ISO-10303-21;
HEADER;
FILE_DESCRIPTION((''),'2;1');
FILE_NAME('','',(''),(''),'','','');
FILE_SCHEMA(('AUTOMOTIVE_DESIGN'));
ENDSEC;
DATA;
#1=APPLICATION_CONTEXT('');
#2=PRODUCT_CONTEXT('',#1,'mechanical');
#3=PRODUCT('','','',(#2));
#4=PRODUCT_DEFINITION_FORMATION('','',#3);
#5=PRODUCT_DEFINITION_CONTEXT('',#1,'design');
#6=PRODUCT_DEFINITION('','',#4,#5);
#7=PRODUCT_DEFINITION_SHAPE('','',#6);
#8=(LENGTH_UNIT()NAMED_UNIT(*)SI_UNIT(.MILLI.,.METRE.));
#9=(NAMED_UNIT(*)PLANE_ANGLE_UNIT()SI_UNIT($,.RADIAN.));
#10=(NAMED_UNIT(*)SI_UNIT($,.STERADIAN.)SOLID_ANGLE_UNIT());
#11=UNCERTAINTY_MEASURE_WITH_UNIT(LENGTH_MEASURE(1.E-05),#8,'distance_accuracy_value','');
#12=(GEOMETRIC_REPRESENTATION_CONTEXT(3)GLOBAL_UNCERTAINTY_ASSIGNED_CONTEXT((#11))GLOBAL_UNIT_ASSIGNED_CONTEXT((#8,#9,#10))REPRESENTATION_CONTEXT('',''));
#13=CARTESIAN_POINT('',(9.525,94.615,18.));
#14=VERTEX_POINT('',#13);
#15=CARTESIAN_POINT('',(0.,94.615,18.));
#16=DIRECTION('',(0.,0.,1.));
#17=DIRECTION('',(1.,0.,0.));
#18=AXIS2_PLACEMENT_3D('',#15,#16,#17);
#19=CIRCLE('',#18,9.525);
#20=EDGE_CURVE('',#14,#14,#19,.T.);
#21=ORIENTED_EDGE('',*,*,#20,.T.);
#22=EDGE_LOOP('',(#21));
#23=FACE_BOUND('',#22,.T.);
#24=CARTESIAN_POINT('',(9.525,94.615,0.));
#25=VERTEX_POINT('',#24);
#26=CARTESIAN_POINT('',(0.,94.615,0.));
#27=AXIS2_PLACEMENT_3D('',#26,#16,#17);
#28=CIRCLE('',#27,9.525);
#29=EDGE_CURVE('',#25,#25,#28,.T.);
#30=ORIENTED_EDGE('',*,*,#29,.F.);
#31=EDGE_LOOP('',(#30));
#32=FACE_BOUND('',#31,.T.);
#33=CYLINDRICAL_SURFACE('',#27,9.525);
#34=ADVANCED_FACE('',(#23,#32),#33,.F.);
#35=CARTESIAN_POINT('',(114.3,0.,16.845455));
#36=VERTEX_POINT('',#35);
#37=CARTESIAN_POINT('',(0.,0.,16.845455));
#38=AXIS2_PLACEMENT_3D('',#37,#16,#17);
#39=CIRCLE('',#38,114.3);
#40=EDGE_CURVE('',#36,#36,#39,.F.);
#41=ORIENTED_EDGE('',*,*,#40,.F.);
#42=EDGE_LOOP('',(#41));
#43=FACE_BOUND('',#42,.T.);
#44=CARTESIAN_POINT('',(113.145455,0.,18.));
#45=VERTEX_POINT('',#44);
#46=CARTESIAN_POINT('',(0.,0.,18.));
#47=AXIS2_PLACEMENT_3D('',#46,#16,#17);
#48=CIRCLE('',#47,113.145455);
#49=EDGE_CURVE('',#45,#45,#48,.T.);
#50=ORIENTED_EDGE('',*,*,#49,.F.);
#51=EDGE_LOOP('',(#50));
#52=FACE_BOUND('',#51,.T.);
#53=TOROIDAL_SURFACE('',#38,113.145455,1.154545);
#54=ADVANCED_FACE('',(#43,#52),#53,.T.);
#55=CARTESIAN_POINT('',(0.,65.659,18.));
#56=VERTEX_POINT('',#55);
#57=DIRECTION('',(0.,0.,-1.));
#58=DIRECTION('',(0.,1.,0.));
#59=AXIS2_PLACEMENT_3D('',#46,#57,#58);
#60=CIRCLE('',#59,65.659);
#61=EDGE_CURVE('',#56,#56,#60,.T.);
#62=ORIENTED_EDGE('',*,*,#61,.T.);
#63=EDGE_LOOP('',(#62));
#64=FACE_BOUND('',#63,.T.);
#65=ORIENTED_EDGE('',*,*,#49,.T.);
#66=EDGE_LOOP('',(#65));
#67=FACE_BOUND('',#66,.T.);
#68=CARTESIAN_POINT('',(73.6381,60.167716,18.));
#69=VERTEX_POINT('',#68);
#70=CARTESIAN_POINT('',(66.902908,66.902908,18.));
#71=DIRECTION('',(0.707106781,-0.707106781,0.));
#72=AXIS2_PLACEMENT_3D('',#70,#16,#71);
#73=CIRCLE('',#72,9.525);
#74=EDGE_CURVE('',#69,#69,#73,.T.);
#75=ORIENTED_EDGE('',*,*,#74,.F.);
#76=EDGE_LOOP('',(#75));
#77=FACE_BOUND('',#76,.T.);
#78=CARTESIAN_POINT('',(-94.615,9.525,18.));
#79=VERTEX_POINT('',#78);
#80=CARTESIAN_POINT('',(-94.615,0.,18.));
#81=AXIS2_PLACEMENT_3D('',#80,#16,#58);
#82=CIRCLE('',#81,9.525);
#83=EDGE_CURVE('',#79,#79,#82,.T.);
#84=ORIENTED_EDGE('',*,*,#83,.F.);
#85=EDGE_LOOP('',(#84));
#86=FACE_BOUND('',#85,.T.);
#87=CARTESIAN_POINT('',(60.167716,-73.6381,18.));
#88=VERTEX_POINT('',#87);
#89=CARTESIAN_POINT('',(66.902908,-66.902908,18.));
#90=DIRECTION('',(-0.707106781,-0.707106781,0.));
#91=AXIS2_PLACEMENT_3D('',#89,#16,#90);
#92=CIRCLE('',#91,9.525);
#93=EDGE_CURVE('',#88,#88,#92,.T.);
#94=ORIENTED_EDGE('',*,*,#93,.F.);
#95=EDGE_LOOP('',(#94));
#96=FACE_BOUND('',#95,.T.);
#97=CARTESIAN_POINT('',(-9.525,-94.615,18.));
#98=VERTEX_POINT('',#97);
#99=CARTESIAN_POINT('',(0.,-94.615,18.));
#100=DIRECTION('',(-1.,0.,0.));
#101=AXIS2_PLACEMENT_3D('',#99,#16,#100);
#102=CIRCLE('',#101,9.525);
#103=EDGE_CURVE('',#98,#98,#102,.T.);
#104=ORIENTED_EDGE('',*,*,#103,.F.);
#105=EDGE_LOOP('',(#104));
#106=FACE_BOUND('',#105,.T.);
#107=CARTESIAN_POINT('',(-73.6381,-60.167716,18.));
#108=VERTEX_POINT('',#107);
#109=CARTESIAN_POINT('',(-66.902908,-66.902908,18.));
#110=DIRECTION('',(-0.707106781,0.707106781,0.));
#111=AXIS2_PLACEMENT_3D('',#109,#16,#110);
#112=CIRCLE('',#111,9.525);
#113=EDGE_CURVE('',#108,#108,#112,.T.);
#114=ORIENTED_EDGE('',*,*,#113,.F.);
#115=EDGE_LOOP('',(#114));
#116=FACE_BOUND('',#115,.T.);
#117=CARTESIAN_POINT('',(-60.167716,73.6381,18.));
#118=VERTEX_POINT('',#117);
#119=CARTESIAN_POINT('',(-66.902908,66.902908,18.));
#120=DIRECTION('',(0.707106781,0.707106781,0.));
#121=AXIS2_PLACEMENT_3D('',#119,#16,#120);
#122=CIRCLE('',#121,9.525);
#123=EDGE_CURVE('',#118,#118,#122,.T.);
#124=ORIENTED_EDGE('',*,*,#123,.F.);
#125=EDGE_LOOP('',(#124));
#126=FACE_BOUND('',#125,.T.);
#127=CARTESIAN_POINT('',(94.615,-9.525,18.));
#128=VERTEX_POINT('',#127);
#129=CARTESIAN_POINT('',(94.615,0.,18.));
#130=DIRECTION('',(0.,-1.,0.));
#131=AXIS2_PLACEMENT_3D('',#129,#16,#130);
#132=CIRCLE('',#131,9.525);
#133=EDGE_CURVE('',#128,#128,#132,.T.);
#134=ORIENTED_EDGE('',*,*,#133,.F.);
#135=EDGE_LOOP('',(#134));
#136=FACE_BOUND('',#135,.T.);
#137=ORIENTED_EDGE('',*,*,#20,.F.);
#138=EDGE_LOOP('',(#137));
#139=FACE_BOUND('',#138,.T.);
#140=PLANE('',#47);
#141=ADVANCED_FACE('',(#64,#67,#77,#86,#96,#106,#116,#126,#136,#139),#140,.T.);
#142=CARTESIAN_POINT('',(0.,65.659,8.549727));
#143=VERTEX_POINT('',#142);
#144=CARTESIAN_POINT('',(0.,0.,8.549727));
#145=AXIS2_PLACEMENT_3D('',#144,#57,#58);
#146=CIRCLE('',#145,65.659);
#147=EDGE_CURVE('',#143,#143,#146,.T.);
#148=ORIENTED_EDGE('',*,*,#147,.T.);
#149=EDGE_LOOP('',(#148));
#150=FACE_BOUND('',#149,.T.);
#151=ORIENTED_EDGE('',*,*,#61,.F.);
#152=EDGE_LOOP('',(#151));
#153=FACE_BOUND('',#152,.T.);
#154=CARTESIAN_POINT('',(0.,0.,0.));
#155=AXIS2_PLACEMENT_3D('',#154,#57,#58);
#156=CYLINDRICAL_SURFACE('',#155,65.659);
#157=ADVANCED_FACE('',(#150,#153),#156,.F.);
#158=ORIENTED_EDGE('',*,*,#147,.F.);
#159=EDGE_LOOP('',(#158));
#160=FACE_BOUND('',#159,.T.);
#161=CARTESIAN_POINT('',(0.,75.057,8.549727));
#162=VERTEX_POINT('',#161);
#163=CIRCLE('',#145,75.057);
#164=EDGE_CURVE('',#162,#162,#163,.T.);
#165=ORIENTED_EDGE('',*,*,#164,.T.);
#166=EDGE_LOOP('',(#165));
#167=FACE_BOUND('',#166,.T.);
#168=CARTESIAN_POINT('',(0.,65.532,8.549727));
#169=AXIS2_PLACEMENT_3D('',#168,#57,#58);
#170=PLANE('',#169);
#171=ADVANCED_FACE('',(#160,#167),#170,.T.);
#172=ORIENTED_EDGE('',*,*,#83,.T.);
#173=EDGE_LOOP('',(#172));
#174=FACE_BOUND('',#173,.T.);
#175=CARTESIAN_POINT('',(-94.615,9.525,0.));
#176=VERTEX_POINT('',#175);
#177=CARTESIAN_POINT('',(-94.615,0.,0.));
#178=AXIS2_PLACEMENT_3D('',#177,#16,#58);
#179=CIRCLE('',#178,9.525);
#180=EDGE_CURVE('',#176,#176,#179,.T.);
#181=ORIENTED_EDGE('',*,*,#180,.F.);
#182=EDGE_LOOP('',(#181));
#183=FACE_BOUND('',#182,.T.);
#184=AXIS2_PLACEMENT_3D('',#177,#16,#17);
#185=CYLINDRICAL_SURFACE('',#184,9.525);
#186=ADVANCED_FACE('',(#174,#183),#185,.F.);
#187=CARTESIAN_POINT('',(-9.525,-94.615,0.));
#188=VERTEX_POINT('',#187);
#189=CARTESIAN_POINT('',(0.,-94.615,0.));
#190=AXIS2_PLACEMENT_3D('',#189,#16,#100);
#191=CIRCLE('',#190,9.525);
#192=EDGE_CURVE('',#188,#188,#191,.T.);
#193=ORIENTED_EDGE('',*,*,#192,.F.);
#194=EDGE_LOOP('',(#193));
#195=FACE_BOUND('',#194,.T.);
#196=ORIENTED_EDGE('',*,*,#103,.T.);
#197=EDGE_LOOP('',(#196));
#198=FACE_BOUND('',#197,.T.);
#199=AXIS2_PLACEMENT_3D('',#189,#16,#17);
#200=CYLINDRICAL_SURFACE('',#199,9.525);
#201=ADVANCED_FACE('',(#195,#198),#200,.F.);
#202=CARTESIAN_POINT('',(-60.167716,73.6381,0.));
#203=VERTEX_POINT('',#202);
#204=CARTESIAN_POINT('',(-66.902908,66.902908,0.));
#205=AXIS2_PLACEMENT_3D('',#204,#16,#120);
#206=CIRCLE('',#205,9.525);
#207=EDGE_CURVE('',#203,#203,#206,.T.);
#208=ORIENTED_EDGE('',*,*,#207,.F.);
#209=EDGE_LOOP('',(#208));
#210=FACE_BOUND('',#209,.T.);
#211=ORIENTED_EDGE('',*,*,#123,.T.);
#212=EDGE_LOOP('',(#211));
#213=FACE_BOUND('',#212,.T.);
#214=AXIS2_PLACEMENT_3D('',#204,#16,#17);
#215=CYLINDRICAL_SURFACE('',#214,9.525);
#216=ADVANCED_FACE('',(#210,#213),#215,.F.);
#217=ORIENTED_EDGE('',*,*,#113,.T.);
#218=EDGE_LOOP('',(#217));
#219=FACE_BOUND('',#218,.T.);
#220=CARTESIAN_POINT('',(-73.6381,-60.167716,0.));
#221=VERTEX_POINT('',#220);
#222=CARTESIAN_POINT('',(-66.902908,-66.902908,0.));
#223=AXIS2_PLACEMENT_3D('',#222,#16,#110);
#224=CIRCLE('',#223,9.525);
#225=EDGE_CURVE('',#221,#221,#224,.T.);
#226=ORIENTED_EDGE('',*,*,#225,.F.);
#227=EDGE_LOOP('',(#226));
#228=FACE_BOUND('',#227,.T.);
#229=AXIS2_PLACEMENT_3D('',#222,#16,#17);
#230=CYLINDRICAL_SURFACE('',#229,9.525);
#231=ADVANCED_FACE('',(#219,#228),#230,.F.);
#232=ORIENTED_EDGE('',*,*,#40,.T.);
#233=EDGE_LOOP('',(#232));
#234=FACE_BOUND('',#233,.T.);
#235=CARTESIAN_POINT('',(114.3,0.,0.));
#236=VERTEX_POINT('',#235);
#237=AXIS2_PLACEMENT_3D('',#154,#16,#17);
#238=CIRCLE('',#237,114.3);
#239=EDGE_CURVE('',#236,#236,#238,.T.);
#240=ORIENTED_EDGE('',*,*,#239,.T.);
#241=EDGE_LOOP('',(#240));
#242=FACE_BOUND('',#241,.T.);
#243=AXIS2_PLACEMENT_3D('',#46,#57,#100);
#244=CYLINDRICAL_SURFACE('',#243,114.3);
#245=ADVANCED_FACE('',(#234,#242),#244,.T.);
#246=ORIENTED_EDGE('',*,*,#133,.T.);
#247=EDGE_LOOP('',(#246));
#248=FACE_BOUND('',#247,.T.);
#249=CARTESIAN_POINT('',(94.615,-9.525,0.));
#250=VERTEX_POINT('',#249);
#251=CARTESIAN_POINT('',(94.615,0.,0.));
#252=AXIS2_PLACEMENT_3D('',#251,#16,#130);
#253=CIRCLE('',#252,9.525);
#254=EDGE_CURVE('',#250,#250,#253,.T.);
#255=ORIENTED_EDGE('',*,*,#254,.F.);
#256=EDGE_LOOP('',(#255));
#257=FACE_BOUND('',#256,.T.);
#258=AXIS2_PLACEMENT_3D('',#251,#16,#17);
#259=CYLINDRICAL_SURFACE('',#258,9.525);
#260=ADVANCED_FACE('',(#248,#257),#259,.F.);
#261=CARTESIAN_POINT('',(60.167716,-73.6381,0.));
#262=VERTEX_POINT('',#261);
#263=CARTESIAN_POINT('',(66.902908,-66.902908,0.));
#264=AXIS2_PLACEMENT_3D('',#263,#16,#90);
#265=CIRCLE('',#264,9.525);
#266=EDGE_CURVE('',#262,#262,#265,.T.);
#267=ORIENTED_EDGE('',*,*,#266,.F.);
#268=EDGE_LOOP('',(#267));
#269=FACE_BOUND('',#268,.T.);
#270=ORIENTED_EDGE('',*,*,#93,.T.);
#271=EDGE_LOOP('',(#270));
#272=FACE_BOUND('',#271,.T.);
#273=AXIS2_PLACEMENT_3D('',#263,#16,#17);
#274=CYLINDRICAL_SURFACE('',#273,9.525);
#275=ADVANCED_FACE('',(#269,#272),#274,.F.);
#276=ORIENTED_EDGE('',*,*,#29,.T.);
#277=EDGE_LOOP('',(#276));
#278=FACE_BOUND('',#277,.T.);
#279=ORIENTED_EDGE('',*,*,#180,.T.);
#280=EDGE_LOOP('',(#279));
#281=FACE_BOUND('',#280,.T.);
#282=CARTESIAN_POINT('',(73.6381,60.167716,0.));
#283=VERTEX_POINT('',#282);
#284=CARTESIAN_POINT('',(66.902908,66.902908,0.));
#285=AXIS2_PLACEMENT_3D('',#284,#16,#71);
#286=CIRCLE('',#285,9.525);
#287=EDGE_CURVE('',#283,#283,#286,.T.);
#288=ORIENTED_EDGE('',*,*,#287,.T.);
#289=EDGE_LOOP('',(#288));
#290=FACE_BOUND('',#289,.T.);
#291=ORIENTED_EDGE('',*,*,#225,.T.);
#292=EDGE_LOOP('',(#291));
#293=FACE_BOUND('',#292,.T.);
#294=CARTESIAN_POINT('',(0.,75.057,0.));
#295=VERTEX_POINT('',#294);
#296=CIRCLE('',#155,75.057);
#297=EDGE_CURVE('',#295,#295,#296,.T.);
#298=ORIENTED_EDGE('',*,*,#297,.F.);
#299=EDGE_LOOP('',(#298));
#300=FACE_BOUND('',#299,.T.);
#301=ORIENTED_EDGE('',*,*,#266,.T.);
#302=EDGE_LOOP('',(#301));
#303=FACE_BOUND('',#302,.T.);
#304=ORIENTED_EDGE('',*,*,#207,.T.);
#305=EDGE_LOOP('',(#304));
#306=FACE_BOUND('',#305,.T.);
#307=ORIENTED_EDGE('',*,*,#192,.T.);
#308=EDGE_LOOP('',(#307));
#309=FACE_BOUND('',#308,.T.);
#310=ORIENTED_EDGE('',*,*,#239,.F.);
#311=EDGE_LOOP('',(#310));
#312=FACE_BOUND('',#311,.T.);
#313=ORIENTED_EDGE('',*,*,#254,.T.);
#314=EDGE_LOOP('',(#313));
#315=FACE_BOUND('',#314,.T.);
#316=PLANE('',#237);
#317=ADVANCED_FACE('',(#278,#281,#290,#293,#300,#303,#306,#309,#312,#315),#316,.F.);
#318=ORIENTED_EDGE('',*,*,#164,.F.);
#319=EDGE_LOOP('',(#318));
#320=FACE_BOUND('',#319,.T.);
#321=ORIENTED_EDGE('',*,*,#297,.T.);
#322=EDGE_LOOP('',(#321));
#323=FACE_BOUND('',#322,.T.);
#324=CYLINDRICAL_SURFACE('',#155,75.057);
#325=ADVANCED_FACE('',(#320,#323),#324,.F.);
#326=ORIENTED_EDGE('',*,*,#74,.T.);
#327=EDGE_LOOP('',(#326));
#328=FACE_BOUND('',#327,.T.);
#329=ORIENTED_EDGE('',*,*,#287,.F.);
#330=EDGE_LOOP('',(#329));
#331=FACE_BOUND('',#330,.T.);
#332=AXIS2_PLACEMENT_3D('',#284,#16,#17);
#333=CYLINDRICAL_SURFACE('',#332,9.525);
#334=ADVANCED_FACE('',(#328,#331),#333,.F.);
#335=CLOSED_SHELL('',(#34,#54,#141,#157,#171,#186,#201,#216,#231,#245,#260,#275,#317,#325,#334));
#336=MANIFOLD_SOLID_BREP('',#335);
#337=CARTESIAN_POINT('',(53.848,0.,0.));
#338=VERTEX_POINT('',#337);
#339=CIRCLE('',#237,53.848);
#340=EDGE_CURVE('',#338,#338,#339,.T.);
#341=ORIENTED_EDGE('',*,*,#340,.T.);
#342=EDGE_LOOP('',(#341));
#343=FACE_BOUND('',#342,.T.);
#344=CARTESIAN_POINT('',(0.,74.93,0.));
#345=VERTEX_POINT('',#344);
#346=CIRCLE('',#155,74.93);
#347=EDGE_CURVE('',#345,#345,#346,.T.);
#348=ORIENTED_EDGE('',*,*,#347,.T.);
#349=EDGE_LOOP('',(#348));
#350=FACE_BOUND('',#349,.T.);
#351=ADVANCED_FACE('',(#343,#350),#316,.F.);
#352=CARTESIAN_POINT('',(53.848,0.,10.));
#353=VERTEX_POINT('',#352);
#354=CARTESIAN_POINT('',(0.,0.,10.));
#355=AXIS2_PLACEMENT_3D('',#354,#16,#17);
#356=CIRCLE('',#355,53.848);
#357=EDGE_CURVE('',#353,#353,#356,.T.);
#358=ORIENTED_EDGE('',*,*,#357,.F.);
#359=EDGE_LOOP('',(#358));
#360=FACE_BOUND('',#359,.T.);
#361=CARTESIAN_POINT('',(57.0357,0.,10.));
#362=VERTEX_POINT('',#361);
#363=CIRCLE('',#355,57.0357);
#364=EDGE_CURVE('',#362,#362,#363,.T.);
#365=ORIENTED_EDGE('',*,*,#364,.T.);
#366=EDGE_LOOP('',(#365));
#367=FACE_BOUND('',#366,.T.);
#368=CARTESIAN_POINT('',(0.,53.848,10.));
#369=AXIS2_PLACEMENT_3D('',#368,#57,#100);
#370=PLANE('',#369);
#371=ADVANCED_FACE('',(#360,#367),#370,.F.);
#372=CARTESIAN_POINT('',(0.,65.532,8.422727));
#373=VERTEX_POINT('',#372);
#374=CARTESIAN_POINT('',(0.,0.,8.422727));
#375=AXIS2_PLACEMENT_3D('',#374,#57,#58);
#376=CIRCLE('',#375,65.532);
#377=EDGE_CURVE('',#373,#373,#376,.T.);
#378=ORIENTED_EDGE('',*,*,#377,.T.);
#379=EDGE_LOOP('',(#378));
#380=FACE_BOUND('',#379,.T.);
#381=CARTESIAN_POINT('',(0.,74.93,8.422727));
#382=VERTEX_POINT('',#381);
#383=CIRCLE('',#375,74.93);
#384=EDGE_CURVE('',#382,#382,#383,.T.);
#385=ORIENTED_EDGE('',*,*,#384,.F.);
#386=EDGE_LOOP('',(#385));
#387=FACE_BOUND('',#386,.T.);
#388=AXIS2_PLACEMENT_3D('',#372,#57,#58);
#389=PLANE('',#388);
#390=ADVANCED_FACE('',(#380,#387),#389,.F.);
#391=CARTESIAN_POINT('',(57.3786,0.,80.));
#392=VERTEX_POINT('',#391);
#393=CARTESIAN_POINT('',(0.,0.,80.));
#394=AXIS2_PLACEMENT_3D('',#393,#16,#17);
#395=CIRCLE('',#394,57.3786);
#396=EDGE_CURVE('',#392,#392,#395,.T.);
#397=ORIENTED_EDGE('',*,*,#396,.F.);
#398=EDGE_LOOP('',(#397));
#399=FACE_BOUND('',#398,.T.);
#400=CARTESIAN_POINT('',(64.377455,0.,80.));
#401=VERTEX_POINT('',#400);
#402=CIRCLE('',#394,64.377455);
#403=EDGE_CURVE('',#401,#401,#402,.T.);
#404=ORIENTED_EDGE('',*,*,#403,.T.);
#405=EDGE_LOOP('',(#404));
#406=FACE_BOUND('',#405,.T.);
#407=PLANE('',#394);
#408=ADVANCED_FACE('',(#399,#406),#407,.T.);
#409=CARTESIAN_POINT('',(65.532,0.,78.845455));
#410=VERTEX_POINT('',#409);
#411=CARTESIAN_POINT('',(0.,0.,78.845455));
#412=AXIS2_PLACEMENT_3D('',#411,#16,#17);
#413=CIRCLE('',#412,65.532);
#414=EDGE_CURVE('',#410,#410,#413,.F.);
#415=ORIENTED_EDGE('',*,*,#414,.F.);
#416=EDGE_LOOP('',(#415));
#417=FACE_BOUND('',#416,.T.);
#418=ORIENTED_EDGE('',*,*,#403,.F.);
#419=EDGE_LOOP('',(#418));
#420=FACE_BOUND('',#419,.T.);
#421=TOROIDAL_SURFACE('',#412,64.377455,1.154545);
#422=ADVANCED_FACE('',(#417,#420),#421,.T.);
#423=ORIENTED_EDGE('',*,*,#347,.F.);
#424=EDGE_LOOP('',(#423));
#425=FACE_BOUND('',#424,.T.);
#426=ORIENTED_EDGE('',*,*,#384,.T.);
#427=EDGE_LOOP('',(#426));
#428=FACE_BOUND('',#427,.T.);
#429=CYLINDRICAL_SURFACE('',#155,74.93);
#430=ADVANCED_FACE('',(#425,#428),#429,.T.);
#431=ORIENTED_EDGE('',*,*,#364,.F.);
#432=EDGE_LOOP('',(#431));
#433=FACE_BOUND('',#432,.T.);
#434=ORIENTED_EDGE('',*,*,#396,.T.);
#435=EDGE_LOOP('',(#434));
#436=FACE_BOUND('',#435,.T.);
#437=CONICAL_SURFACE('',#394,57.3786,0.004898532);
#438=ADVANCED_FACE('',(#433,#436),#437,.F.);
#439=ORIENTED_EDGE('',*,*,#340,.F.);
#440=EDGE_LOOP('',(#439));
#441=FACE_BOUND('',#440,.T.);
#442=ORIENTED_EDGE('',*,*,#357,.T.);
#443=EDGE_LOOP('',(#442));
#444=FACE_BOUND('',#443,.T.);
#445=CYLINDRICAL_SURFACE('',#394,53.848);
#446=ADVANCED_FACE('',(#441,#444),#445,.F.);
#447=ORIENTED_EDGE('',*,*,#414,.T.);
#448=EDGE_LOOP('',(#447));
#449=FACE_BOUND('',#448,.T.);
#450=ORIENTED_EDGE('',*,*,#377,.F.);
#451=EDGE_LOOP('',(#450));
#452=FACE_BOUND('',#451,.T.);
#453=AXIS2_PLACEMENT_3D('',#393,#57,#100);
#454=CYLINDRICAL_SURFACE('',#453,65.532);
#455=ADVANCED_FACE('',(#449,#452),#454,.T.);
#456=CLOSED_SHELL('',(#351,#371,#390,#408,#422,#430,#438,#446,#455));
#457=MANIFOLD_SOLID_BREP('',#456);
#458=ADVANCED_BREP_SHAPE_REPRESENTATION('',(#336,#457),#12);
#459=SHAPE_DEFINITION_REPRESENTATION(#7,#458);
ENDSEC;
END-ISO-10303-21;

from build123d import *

# Parameters (mm, degrees)
SKETCH1_R                       = 114.3
EXTRUDE1_DEPTH                  = 18
SKETCH2_R                       = 65.532
EXTRUDE2_DEPTH                  = 62
SKETCH3_R                       = 9.525
EXTRUDE3_DEPTH                  = 174.127063165
CIRPATTERN1_COUNT               = 8
FILLET1_R                       = 1.154545455
CUT_REVOLVE_THIN1_START         = 8.422727273
CUT_REVOLVE_THIN1_OUTLINE_R     = 75.057
CUT_REVOLVE_THIN1_OUTLINE_R_2   = 65.532
CUT_REVOLVE_THIN1_DEPTH         = 0.127
CUT_REVOLVE_THIN1_2_OUTLINE_R   = 75.057
CUT_REVOLVE_THIN1_2_OUTLINE_R_2 = 74.93
CUT_REVOLVE_THIN1_2_DEPTH       = 8.422727273
CUT_REVOLVE_THIN1_START_2       = 8.549727273
CUT_REVOLVE_THIN1_3_OUTLINE_R   = 65.659
CUT_REVOLVE_THIN1_3_OUTLINE_R_2 = 65.532
CUT_REVOLVE_THIN1_3_DEPTH       = 9.450272727


# Read off the part's stored shape, not the designer's step: Cut-Revolve-Thin1
with BuildPart() as part:
    # Sketch1 → Extrude1 (new body)
    with BuildSketch(Plane.XY):
        Circle(SKETCH1_R)
    extrude(amount=EXTRUDE1_DEPTH)

    # Sketch2 → Extrude2 (add)
    with BuildSketch(Plane.XY.offset(18)):
        Circle(SKETCH2_R)
    extrude(amount=EXTRUDE2_DEPTH)

    # Sketch3 → Extrude3 (cut, through all)
    with BuildSketch(Plane.XY.offset(18)):
        with Locations((0, 94.615)):
            Circle(SKETCH3_R)
    extrude3 = extrude(amount=-EXTRUDE3_DEPTH, mode=Mode.SUBTRACT)

    # CirPattern1: Extrude3 ×8 about axis
    cirpattern1_axis = Axis((0, 0, 0), (0, 0, 1))
    for i in range(1, CIRPATTERN1_COUNT):
        add(extrude3.rotate(cirpattern1_axis, i * 360 / CIRPATTERN1_COUNT), mode=Mode.SUBTRACT)

    # Fillet1
    fillet1_edges = [part.edges().sort_by_distance(p)[0] for p in [
        (-114.3, 0, 18),
        (-65.532, 0, 80),
    ]]
    fillet(fillet1_edges, radius=FILLET1_R)

    # Sketch4 → Cut-Revolve1 (revolve, cut)
    with BuildSketch(Plane(origin=(0, 0, 62.70625), x_dir=(0, 0, 1), z_dir=(-1, 0, 0)), mode=Mode.PRIVATE) as cut_revolve1_sk:
        Polygon((-62.70625, 53.848), (-52.70625, 53.848), (-52.70625, 57.0357), (17.29375, 57.3786), (17.29375, 0), (-62.70625, 0), align=None)
    revolve(cut_revolve1_sk.sketch.rotate(Axis((0, 0, 80), (0, 0, -1)), 90), axis=Axis((0, 0, 80), (0, 0, -1)), mode=Mode.SUBTRACT)

    # Cut-Revolve-Thin1 outline → Cut-Revolve-Thin1 (cut)
    with BuildSketch(Plane.XY.offset(CUT_REVOLVE_THIN1_START)):
        Circle(CUT_REVOLVE_THIN1_OUTLINE_R)
        Circle(CUT_REVOLVE_THIN1_OUTLINE_R_2, mode=Mode.SUBTRACT)
    extrude(amount=CUT_REVOLVE_THIN1_DEPTH, mode=Mode.SUBTRACT)

    # Cut-Revolve-Thin1 2 outline → Cut-Revolve-Thin1 2 (cut)
    with BuildSketch(Plane.XY):
        Circle(CUT_REVOLVE_THIN1_2_OUTLINE_R)
        Circle(CUT_REVOLVE_THIN1_2_OUTLINE_R_2, mode=Mode.SUBTRACT)
    extrude(amount=CUT_REVOLVE_THIN1_2_DEPTH, mode=Mode.SUBTRACT)

    # Cut-Revolve-Thin1 3 outline → Cut-Revolve-Thin1 3 (cut)
    with BuildSketch(Plane.XY.offset(CUT_REVOLVE_THIN1_START_2)):
        Circle(CUT_REVOLVE_THIN1_3_OUTLINE_R)
        Circle(CUT_REVOLVE_THIN1_3_OUTLINE_R_2, mode=Mode.SUBTRACT)
    extrude(amount=CUT_REVOLVE_THIN1_3_DEPTH, mode=Mode.SUBTRACT)


solid = part.part
